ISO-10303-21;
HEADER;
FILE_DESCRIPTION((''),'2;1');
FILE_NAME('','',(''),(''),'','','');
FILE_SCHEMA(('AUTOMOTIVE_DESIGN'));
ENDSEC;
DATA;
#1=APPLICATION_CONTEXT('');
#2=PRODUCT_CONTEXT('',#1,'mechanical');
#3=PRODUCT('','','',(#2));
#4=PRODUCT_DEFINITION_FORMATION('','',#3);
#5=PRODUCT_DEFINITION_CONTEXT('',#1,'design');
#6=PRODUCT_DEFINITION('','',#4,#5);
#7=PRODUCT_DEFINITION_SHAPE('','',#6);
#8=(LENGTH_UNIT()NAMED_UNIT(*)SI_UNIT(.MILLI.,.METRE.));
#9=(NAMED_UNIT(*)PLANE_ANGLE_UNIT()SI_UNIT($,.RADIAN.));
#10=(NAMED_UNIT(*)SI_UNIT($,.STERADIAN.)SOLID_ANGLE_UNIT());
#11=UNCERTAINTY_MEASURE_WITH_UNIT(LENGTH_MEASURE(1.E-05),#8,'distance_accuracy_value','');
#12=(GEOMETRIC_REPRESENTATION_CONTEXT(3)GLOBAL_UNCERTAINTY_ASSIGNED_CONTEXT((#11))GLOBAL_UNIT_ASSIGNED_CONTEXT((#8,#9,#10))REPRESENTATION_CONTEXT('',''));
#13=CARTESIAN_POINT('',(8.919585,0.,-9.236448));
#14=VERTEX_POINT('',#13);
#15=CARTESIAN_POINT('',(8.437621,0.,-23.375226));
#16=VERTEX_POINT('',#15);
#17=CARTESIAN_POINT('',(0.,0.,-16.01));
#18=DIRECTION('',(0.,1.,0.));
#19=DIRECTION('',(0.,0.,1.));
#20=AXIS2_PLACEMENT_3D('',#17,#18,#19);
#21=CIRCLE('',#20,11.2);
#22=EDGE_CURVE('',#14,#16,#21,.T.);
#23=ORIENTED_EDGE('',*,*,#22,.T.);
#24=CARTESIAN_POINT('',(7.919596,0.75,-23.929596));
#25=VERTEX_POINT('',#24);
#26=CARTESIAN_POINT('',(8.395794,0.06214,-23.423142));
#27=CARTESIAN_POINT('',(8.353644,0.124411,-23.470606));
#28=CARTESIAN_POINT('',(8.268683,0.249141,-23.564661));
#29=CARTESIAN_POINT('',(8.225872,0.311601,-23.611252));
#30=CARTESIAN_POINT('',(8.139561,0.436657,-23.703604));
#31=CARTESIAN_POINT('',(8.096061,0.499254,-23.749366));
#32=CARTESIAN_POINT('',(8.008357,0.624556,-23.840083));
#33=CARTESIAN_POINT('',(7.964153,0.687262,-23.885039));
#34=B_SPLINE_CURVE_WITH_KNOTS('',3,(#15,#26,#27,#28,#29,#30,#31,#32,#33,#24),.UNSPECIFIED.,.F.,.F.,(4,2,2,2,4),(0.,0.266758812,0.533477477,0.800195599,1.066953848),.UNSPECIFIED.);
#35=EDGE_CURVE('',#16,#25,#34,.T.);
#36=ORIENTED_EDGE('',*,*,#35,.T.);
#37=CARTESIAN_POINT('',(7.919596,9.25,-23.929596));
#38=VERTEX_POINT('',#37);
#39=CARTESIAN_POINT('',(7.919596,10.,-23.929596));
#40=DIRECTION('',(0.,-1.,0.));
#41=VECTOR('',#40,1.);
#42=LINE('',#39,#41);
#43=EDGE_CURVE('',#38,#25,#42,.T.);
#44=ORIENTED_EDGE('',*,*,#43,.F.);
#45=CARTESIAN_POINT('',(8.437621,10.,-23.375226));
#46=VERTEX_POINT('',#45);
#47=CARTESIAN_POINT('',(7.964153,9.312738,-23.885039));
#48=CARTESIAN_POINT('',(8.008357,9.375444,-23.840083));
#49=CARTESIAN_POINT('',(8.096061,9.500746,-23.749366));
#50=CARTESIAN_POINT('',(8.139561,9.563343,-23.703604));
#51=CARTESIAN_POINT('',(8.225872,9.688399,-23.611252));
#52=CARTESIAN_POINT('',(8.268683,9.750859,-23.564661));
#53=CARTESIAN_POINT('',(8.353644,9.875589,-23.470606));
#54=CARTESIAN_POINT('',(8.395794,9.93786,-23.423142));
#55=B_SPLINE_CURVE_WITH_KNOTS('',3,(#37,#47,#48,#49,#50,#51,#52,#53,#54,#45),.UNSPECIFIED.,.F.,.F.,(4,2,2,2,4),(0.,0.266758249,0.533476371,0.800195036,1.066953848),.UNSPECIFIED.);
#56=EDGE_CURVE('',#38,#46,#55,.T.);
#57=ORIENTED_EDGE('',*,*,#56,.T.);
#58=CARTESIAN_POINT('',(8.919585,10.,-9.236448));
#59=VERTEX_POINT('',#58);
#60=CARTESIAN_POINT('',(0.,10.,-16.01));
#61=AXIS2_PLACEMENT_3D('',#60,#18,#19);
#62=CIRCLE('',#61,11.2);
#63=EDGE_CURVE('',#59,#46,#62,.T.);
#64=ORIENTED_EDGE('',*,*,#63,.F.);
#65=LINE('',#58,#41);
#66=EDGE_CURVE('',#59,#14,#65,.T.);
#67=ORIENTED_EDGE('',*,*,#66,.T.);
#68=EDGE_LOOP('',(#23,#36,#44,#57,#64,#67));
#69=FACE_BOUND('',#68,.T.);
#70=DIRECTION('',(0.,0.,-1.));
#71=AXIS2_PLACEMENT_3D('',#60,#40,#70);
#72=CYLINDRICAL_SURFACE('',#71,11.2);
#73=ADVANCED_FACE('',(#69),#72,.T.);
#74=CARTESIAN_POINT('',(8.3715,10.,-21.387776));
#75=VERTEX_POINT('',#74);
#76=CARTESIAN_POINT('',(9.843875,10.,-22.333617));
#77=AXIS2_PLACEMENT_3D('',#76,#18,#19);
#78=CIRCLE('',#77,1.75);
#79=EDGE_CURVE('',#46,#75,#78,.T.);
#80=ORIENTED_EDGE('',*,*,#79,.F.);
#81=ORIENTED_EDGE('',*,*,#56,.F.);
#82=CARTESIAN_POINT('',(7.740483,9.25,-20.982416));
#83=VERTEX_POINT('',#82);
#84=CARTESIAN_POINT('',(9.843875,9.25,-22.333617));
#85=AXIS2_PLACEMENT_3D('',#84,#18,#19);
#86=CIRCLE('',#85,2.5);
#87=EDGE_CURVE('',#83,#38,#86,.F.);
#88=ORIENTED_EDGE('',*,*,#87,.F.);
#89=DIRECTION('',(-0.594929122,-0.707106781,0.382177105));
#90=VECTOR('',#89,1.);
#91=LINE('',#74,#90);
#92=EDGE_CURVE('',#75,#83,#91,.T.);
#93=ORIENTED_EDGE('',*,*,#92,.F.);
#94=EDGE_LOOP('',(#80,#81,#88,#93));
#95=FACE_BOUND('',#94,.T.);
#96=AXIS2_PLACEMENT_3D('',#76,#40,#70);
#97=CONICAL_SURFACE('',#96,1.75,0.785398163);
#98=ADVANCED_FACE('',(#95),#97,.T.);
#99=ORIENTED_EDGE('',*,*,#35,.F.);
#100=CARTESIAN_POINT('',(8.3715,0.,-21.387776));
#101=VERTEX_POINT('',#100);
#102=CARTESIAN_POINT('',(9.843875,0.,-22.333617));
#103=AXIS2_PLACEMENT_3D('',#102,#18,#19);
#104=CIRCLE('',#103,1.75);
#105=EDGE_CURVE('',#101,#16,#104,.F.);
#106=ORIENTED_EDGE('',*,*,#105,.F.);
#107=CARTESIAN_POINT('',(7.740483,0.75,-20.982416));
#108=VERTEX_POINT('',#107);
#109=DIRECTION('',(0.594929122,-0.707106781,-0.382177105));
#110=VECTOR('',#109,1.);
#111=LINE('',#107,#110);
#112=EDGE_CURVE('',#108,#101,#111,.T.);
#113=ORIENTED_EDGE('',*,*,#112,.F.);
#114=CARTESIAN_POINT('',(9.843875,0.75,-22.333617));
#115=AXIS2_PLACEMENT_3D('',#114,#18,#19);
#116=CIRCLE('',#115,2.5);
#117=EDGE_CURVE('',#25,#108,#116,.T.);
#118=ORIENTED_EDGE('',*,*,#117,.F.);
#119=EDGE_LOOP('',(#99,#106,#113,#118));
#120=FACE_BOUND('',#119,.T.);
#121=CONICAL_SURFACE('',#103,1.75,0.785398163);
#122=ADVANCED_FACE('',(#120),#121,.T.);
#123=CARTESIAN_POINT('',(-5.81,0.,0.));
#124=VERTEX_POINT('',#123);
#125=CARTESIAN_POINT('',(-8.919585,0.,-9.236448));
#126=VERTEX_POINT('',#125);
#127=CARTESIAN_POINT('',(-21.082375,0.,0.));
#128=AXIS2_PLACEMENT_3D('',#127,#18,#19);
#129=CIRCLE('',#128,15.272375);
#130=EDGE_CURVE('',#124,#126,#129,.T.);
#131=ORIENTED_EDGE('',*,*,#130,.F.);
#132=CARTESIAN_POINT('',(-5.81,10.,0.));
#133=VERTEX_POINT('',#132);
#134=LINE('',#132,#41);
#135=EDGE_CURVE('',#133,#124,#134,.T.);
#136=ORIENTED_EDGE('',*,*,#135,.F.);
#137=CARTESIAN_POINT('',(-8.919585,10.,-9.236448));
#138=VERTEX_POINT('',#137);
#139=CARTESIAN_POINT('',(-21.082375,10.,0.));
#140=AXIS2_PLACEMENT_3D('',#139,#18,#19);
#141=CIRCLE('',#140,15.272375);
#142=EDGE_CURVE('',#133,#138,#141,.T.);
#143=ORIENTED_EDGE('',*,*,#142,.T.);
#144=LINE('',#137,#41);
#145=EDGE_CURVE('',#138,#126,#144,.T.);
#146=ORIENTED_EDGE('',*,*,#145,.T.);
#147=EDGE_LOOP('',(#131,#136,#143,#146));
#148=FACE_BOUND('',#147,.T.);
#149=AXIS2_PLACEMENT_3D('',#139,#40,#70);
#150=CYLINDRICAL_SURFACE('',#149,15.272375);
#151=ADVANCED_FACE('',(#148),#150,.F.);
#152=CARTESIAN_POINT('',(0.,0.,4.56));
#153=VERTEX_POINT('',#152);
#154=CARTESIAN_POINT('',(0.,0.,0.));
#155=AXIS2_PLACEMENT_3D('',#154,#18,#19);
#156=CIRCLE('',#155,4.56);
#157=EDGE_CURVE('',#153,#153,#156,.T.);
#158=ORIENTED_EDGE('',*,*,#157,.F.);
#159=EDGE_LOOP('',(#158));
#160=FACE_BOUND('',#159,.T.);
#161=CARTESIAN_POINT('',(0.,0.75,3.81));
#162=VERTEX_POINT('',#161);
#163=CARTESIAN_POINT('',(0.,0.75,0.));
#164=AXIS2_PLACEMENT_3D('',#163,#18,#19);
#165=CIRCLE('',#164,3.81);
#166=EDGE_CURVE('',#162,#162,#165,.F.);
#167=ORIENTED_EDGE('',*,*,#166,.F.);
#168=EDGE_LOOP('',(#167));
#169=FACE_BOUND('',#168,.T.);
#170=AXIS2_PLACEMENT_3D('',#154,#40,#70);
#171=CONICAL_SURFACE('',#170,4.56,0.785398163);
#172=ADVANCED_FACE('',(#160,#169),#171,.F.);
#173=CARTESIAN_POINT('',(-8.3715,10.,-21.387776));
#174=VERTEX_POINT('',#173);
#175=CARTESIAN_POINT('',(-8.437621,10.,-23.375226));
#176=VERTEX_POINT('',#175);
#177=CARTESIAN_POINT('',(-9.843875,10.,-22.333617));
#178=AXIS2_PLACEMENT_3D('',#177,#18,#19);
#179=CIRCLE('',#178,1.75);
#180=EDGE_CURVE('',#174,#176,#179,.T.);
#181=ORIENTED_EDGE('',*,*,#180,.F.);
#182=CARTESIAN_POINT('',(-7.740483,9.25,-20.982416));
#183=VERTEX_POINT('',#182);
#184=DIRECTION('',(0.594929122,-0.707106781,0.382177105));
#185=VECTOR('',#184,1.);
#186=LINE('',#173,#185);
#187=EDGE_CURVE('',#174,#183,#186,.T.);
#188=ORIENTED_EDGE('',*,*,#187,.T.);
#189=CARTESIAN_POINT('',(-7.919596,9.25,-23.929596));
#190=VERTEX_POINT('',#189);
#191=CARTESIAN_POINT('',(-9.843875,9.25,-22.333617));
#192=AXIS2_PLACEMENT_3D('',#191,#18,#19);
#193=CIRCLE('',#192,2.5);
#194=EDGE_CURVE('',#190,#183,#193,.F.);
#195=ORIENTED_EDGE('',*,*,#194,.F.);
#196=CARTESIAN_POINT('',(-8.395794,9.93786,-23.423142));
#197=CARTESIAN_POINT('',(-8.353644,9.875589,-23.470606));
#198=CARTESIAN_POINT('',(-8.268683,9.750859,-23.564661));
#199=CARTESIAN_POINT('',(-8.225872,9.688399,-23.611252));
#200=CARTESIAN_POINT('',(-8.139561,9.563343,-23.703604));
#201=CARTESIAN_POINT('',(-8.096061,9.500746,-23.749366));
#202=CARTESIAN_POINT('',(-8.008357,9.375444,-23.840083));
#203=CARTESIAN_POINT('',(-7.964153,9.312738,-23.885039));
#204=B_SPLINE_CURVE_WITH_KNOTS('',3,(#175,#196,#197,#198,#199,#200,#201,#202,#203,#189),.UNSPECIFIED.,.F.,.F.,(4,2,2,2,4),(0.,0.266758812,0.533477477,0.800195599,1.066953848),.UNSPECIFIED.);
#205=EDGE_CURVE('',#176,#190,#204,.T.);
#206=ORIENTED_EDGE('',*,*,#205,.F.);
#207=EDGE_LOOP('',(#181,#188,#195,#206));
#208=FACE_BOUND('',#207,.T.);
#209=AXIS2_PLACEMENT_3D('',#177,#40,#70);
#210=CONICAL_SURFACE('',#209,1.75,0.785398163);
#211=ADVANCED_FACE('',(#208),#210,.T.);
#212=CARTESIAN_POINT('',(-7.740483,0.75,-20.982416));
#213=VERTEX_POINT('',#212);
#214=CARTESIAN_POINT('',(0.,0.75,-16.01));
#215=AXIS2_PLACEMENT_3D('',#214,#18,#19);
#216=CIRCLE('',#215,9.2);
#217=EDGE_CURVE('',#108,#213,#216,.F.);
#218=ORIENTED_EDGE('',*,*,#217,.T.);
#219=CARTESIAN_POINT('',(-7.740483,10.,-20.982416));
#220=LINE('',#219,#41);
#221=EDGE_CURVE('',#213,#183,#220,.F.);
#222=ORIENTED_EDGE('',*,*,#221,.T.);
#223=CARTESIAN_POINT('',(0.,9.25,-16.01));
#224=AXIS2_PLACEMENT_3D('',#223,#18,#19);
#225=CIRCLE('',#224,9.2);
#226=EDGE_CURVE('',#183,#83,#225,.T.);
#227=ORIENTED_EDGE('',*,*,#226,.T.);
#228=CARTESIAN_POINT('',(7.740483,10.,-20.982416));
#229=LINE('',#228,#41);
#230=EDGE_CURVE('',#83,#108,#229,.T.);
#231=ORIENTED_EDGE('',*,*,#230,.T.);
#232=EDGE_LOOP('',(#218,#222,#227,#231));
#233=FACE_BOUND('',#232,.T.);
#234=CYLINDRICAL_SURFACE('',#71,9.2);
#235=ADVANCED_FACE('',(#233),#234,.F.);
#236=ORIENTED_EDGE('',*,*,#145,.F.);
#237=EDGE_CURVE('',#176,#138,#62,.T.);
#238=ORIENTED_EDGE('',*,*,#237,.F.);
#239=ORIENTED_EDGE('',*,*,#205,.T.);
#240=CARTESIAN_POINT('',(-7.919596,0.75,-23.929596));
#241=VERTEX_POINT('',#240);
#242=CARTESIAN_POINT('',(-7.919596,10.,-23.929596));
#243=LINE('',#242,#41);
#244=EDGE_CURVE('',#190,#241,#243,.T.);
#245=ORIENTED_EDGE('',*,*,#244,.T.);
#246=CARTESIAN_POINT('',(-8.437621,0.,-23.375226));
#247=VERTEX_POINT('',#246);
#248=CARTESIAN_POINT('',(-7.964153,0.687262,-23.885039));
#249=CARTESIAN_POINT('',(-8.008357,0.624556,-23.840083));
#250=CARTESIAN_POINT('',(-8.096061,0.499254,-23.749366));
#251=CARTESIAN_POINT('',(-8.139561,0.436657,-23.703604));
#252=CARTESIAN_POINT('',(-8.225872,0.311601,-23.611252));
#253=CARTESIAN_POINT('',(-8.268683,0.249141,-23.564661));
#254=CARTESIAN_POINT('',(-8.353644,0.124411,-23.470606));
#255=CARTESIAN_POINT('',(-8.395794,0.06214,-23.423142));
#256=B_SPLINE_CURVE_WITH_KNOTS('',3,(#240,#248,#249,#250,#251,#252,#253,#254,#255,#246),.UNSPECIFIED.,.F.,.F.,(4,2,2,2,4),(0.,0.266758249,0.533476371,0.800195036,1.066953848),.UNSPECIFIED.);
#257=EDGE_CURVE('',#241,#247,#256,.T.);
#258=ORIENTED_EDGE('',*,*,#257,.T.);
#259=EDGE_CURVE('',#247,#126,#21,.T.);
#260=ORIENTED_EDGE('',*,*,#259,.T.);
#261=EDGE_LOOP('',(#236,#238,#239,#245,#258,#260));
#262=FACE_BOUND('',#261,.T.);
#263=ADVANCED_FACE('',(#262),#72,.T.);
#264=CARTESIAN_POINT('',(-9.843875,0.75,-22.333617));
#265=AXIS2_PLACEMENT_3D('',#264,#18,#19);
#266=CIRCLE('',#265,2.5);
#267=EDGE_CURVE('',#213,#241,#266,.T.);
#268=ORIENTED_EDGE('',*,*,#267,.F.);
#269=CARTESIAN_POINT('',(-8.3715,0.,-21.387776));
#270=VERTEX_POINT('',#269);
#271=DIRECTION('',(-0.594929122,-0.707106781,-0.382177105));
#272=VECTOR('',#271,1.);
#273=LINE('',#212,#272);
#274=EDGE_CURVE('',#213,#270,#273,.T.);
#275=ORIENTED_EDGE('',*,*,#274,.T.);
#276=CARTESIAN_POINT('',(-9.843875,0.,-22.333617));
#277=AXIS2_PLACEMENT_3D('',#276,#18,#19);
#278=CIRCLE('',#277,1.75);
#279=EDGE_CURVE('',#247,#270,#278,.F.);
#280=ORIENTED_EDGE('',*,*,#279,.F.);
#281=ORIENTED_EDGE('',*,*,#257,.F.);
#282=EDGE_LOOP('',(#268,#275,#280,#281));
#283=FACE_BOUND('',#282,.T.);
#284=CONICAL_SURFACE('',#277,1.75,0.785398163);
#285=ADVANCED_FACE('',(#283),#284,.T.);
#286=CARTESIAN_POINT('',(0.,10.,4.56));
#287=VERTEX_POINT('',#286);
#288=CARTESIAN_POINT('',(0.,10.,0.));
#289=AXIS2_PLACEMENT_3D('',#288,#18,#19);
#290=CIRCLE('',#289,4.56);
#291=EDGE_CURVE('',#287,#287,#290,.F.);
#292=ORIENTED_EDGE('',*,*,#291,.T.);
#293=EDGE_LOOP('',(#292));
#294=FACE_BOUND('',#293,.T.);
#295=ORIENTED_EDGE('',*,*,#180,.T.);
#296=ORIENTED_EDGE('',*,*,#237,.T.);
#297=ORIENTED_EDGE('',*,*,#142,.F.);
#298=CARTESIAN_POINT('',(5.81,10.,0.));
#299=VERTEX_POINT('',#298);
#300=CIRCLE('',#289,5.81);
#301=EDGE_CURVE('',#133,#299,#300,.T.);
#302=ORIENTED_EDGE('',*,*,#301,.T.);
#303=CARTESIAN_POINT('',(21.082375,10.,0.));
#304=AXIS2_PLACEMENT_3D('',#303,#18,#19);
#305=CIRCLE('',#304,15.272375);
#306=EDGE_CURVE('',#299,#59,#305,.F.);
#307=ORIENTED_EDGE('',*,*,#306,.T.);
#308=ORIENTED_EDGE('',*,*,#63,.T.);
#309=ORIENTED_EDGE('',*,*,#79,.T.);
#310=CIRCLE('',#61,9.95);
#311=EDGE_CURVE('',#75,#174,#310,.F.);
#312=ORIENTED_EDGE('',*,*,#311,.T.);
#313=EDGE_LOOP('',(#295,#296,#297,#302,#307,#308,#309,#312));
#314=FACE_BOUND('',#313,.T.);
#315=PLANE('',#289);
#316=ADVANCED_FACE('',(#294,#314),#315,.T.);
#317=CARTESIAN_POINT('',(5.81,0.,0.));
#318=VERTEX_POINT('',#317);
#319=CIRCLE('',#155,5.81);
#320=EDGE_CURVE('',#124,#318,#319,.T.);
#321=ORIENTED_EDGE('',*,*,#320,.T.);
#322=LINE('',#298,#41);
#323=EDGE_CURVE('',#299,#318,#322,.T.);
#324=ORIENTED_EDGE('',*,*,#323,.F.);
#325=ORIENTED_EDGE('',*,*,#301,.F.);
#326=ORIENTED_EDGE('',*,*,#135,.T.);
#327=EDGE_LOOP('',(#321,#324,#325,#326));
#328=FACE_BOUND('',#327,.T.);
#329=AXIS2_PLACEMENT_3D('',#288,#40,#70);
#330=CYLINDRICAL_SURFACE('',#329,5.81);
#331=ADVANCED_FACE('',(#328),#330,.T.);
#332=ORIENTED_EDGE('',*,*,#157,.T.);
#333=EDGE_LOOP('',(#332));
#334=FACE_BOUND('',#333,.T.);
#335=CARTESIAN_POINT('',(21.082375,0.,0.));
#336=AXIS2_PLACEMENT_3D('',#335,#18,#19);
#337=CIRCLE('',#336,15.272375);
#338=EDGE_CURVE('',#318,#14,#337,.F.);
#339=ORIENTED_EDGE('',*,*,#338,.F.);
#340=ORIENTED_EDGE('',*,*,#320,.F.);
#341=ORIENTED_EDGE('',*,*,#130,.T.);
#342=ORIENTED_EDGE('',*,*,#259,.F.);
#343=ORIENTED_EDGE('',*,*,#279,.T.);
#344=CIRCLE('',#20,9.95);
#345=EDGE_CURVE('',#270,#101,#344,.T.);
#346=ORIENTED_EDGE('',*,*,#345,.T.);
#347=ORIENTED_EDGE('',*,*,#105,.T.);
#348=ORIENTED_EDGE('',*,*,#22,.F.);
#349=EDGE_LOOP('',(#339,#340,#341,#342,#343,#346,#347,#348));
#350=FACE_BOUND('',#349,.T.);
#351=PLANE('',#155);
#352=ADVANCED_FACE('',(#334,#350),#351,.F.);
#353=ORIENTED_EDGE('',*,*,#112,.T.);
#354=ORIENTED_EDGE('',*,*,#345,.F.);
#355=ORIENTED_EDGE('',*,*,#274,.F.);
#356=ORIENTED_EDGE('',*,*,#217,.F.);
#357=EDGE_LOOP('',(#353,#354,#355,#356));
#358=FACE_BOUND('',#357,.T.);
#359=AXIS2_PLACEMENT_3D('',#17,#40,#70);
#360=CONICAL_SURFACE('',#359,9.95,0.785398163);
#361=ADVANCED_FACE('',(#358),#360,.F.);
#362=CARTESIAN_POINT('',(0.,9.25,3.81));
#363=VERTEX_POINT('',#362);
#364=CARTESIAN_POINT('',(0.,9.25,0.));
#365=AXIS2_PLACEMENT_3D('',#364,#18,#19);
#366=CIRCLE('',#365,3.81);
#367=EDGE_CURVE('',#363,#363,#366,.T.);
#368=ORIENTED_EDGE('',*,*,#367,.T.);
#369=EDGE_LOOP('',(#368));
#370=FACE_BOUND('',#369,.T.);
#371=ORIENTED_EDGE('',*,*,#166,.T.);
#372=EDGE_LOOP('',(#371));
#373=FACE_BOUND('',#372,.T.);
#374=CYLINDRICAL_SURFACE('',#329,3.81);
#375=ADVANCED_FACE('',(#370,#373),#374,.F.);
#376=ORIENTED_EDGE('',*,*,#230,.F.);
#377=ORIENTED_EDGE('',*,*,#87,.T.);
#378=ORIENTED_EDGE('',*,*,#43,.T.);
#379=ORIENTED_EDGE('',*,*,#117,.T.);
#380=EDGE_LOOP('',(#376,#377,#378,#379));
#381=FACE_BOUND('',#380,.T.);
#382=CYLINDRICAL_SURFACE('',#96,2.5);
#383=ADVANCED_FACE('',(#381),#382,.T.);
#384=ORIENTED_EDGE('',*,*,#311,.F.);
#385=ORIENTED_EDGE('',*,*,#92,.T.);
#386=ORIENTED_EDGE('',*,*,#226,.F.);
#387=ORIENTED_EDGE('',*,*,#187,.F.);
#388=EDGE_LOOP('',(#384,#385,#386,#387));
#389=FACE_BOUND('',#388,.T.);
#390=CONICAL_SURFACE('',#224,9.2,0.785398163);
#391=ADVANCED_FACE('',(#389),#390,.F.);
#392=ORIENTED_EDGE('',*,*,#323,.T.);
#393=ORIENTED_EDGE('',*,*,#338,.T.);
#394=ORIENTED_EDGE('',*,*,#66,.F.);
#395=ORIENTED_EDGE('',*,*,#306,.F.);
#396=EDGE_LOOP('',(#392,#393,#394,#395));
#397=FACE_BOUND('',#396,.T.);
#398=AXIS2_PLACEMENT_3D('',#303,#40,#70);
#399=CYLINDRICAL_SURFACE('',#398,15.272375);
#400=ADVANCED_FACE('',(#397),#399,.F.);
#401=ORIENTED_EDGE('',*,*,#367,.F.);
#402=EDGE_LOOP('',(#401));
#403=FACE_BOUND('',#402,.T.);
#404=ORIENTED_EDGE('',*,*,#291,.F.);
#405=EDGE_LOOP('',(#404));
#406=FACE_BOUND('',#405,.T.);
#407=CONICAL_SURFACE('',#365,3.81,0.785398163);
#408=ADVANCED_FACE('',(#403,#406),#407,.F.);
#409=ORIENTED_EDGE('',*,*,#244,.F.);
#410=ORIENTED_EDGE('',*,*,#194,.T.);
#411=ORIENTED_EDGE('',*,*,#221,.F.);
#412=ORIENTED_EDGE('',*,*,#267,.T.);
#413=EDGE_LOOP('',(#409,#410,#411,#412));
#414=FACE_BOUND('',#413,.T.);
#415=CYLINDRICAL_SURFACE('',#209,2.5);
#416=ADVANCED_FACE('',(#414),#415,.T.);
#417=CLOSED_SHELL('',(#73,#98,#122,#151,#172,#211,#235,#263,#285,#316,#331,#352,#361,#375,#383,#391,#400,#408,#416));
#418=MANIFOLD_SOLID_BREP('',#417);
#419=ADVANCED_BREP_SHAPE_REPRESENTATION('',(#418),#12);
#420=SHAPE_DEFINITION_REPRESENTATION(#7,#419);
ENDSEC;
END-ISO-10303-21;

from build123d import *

# Parameters (mm, degrees)
SKETCH1_R           = 3.81
BOSS_EXTRUDE1_DEPTH = 10
CHAMFER1_SIZE       = 0.75
FILLET1_R           = 2.5
CHAMFER2_SIZE       = 0.75


with BuildPart() as part:
    # Sketch1 → Boss-Extrude1 (new body)
    # profile 1 of 2: a face of its own
    with BuildSketch(Plane(origin=(0, 0, 0), x_dir=(1, 0, 0), z_dir=(0, 1, 0))):
        with BuildLine():
            Line((-6.505382387, 22.515382387), (-7.919595949, 23.929595949))
            ThreePointArc((-7.919595949, 23.929595949), (0, 4.81), (7.919595949, 23.929595949))
            Line((7.919595949, 23.929595949), (6.505382387, 22.515382387))
            ThreePointArc((6.505382387, 22.515382387), (0, 6.81), (-6.505382387, 22.515382387))
        make_face()
    # profile 2 of 2: a face of its own
    with BuildSketch(Plane(origin=(0, 0, 0), x_dir=(1, 0, 0), z_dir=(0, 1, 0))):
        with BuildLine():
            ThreePointArc((8.919585019, 9.236448267), (0, 4.81), (-8.919585019, 9.236448267))
            ThreePointArc((-8.919585019, 9.236448267), (-6.608257967, 4.872922521), (-5.81, 0))
            ThreePointArc((-5.81, 0), (0, -5.81), (5.81, 0))
            ThreePointArc((5.81, 0), (6.608257967, 4.872922521), (8.919585019, 9.236448267))
        make_face()
        with Locations(Location((0, 0, 0), (0, 0, 270))):
            Circle(SKETCH1_R, mode=Mode.SUBTRACT)
    extrude(amount=BOSS_EXTRUDE1_DEPTH)

    # Chamfer1
    chamfer1_edges = [part.edges().sort_by_distance(p)[0] for p in [
        (0, 0, -3.81),
        (0, 10, -3.81),
    ]]
    chamfer(chamfer1_edges, length=CHAMFER1_SIZE)

    # Fillet1
    # the kernel refuses this fillet: 2.5 mm, written as the material it takes off along each edge
    with BuildSketch(Plane(origin=(6.505382387, -5, -22.515382387), x_dir=(0.7071067811865479, 0, -0.707106781186547), z_dir=(0, 1, 0))) as fillet1_piece_1:
        with BuildLine():
            CenterArc((2.232142857, -2.489198605), FILLET1_R, 95.327997904, 72.388325655)
            Line((-0.210622711, -1.957318561), (-0.259478022, -1.94668096))
            ThreePointArc((-0.259478022, -1.94668096), (-0.102520236, -0.978959627), (-0.05, 0))
            Line((-0.05, 0), (0, 0.05))
            ThreePointArc((0, 0.05), (1, 0.05), (1.995357143, 0.049783972))
            Line((1.995357143, 0.049783972), (2, 0))
        make_face()
    extrude(amount=20, mode=Mode.SUBTRACT)
    with BuildSketch(Plane(origin=(-6.505382387, -5, -22.515382387), x_dir=(-0.7071067811865465, 0, -0.7071067811865487), z_dir=(0, 1, 0))) as fillet1_piece_2:
        with BuildLine():
            CenterArc((2.232142857, 2.489198605), FILLET1_R, 192.283676441, 72.388325655)
            Line((-0.210622711, 1.957318561), (-0.259478022, 1.94668096))
            ThreePointArc((-0.259478022, 1.94668096), (-0.102520236, 0.978959627), (-0.05, 0))
            Line((-0.05, 0), (0, -0.05))
            ThreePointArc((0, -0.05), (1, -0.05), (1.995357143, -0.049783972))
            Line((1.995357143, -0.049783972), (2, 0))
        make_face()
    extrude(amount=20, mode=Mode.SUBTRACT)

    # Chamfer2
    chamfer2_edges = [part.edges().sort_by_distance(p)[0] for p in [
        (0, 0, -6.81),
        (0, 10, -6.81),
        (-7.348479111, 0, -22.485272721),
        (7.348479111, 0, -22.485272721),
        (-7.348479111, 10, -22.485272721),
        (7.348479111, 10, -22.485272721),
    ]]
    chamfer(chamfer2_edges, length=CHAMFER2_SIZE)


solid = part.part
